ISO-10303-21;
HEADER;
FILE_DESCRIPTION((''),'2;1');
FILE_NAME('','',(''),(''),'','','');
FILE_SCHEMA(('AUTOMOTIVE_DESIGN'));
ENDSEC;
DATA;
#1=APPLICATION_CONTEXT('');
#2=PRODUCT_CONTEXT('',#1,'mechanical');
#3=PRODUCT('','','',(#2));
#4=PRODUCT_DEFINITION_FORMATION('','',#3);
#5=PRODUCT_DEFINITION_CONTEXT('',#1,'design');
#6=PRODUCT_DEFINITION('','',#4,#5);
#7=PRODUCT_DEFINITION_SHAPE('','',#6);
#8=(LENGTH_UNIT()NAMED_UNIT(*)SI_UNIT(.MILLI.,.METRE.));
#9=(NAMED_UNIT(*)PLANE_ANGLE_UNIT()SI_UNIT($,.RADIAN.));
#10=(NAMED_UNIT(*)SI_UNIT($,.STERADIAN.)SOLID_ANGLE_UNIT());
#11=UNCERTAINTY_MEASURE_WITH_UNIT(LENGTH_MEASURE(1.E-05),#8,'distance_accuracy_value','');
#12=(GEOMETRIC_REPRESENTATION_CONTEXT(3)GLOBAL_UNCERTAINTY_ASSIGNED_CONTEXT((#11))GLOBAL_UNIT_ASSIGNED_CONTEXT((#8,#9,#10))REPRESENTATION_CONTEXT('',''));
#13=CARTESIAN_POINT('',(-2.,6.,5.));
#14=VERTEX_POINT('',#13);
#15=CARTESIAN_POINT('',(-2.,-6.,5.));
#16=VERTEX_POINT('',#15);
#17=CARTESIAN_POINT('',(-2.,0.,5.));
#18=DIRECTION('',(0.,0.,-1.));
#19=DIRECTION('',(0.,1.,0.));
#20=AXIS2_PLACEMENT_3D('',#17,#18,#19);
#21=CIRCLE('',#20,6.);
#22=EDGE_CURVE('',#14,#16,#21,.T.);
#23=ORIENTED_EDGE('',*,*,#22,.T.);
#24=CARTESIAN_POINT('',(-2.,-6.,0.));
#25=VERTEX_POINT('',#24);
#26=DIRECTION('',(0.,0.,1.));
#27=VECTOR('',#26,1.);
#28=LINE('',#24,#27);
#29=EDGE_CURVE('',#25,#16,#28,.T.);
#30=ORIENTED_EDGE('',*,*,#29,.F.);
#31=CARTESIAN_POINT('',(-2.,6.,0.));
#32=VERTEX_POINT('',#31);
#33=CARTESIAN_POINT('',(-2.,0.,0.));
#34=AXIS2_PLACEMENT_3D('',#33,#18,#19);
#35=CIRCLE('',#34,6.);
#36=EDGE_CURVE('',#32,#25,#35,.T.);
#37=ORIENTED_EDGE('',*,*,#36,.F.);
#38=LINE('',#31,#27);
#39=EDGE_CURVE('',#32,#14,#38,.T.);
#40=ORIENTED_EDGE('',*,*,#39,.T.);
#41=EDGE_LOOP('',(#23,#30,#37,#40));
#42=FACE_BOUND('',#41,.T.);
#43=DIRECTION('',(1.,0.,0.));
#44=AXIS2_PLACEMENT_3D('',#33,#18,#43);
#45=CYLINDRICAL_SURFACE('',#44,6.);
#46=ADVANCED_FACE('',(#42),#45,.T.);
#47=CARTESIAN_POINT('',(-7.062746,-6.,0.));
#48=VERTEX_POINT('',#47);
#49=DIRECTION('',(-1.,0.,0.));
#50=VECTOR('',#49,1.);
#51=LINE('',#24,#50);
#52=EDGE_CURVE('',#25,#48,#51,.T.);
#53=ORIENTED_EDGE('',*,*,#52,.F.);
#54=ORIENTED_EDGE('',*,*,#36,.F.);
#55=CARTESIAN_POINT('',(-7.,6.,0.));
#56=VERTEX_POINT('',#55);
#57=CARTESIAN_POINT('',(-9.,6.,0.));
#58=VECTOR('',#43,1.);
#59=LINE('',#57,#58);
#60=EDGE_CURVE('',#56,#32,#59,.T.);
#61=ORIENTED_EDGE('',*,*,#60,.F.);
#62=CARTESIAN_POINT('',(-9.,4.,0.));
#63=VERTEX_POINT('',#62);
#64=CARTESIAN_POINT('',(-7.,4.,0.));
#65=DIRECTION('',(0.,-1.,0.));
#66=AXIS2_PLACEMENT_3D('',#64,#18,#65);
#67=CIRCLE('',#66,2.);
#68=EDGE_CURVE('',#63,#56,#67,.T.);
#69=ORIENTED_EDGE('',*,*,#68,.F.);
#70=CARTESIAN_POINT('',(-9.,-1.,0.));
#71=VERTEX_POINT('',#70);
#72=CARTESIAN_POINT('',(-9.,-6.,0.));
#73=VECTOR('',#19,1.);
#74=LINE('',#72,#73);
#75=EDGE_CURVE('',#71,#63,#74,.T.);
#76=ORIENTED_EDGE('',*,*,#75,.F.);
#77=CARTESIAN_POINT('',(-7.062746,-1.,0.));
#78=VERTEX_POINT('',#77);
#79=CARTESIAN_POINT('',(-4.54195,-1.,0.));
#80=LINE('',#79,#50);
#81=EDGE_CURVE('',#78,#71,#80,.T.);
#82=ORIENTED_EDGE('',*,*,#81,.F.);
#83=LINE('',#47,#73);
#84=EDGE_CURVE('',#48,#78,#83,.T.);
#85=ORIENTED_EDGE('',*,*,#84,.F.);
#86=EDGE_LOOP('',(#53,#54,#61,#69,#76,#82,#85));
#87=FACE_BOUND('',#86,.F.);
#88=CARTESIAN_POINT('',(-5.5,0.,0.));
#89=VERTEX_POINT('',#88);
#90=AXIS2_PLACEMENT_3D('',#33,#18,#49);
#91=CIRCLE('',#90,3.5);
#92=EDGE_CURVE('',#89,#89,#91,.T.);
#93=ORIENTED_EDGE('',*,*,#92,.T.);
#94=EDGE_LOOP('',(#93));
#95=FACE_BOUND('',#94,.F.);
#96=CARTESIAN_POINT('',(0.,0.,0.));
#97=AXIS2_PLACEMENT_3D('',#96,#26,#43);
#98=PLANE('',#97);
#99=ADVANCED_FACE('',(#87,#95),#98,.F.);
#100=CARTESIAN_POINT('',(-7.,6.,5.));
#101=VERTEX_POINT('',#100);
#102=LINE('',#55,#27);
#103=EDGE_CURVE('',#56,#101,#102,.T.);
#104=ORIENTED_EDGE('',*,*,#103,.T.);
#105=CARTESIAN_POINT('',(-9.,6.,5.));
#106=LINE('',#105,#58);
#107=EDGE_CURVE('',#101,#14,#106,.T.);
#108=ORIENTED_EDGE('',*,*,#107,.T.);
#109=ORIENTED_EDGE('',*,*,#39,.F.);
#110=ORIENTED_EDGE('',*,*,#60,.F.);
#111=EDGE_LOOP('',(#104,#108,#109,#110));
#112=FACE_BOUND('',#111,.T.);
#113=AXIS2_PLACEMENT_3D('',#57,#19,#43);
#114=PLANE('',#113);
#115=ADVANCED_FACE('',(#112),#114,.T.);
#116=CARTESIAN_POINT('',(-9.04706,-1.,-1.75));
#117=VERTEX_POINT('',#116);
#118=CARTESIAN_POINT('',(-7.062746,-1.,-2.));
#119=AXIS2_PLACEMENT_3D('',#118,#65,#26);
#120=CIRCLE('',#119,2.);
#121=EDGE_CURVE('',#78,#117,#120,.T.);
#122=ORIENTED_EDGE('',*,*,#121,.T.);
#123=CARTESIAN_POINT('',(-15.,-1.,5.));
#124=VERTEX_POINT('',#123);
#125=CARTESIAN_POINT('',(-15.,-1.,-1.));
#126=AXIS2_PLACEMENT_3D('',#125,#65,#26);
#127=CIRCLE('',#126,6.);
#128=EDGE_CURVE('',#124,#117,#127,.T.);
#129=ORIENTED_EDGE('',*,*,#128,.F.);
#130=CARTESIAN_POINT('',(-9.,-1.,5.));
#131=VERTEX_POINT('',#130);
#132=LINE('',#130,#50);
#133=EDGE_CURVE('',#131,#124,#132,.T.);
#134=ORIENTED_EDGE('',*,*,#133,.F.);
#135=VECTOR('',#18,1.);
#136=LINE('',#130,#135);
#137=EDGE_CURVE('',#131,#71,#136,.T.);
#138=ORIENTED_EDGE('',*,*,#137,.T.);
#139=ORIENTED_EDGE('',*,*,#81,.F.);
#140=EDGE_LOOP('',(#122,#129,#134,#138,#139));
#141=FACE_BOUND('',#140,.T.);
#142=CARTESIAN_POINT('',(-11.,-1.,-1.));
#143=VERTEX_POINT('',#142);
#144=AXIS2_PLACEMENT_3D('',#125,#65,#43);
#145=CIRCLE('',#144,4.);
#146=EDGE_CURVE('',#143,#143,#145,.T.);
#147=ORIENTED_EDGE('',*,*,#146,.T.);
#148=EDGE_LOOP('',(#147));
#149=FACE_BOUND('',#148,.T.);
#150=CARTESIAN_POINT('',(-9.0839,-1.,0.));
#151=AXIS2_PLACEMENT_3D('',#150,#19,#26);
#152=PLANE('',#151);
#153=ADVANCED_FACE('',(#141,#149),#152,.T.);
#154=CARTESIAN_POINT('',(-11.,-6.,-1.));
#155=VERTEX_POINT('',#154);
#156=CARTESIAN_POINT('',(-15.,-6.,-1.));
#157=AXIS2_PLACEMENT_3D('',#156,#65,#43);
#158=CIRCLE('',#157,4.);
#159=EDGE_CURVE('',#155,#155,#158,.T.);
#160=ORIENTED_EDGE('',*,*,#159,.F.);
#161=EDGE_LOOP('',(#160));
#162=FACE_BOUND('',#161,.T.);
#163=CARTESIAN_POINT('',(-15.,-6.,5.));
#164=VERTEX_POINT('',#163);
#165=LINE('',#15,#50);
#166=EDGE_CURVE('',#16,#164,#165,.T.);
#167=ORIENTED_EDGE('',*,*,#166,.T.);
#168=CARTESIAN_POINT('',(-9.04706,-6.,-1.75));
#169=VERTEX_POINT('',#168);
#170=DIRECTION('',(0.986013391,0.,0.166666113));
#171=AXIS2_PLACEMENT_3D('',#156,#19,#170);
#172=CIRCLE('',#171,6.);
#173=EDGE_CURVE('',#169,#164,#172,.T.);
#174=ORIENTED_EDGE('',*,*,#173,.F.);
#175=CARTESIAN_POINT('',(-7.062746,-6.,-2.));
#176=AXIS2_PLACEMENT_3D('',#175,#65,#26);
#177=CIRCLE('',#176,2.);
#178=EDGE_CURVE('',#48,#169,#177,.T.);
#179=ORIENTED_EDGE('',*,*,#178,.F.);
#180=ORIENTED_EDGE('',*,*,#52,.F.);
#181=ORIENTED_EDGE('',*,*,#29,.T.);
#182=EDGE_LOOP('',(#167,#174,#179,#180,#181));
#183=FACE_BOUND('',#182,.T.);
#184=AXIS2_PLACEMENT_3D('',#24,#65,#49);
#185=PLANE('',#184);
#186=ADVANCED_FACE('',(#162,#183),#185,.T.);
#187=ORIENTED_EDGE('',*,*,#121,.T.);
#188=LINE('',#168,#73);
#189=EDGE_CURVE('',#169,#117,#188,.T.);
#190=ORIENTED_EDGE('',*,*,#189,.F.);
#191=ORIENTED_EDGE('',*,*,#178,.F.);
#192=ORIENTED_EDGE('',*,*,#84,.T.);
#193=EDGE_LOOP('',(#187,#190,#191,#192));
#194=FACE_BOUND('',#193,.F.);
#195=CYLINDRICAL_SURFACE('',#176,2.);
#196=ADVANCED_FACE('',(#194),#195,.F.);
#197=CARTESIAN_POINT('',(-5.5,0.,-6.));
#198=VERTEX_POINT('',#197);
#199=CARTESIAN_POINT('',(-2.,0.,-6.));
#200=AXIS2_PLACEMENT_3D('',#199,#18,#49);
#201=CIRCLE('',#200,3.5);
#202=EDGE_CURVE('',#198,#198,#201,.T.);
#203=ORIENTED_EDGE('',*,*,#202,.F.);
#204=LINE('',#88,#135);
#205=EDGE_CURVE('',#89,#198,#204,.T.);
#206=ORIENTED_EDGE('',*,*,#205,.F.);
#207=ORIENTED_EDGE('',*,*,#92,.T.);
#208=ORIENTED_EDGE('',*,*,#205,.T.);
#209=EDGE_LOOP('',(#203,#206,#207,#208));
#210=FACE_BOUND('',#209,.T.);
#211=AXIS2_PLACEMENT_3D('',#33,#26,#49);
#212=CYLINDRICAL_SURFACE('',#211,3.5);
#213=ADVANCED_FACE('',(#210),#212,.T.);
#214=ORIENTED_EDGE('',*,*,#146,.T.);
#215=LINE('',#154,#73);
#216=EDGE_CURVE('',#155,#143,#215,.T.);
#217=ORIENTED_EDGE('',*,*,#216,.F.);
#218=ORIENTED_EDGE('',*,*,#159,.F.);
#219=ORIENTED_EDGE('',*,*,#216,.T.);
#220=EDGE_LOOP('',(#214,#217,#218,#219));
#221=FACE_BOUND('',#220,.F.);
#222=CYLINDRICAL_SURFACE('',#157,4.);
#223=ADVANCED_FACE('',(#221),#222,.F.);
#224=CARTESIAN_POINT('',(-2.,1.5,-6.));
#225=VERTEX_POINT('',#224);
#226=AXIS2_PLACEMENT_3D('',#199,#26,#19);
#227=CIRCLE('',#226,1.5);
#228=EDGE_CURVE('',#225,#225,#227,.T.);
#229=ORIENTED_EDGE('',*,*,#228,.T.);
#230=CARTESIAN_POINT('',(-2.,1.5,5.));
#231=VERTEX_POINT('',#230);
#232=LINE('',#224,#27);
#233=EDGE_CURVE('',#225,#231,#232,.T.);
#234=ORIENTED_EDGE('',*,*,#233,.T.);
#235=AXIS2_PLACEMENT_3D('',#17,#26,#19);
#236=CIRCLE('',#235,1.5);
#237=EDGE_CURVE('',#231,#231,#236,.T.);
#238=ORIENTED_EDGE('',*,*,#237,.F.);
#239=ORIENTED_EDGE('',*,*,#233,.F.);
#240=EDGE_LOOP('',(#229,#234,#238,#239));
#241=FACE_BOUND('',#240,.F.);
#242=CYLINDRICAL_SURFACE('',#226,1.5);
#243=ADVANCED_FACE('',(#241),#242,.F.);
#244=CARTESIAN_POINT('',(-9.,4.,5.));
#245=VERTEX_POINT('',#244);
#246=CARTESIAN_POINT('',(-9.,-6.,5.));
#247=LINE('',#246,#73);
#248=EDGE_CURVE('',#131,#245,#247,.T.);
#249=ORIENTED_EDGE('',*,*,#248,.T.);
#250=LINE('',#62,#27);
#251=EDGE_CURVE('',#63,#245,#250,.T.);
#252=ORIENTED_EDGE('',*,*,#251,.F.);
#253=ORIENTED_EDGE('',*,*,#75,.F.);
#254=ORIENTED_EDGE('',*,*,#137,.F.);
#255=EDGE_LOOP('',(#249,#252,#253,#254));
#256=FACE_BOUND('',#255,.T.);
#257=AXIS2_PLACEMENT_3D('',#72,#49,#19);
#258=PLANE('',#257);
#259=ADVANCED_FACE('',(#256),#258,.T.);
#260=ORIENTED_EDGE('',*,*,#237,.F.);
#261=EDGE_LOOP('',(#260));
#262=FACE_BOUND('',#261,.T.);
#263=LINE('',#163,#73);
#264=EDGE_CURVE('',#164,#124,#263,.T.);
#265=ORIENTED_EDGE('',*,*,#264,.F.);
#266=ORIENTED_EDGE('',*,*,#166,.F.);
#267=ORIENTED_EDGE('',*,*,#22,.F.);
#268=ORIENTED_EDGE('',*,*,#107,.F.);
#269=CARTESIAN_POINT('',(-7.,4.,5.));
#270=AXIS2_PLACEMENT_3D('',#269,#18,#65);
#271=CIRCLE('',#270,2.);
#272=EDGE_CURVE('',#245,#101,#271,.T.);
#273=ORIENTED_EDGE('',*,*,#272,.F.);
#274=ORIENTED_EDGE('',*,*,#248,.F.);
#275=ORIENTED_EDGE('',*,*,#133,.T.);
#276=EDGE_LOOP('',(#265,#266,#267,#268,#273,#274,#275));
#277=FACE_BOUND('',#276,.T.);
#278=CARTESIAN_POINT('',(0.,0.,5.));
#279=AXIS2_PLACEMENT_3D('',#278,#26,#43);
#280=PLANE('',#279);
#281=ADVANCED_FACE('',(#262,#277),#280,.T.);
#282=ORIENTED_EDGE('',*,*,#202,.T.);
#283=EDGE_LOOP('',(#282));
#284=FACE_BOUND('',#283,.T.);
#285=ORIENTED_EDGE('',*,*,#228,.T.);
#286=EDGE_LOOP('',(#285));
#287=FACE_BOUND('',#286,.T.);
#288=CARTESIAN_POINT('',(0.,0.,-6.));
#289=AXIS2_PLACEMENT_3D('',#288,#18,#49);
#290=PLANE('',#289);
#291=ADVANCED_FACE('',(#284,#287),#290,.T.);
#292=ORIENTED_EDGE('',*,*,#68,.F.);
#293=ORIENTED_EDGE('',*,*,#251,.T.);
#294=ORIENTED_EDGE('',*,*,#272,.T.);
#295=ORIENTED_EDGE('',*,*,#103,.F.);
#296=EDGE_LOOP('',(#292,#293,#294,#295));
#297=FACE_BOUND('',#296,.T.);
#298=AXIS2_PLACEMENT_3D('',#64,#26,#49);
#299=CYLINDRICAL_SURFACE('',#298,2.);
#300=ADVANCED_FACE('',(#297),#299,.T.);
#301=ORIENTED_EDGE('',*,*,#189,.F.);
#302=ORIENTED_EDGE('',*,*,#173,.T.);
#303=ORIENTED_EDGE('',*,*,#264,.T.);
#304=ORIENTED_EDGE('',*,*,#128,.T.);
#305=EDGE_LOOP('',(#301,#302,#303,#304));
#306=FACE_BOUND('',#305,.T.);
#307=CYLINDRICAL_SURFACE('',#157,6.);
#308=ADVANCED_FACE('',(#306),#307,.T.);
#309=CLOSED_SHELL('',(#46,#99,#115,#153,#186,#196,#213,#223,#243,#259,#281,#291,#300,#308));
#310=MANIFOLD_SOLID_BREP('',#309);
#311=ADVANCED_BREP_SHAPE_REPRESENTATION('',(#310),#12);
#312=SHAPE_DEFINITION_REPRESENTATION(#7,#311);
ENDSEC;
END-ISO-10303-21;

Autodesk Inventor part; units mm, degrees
ref_plane "YZ Plane" through (0, 0, 0) normal (1, 0, 0) x (0, 1, 0)
ref_plane "XZ Plane" through (0, 0, 0) normal (0, 1, 0) x (-1, 0, 0)
ref_plane "XY Plane" through (0, 0, 0) normal (0, 0, 1) x (1, 0, 0)
sketch "Sketch1" plane through (0, 0, 0) normal (0, 0, 1) x (1, 0, 0)
  circle A0 centre (-2, 0) radius 4 projected
  arc A1 (-2, 6) -> (-2, -6) centre (-2, 0) ccw projected
  circle A2 centre (-2, 0) radius 6
  line L0 (-2, -6) -> (-9, -6)
  line L1 (-9, -6) -> (-9, 6)
  line L2 (-9, 6) -> (-2, 6)
  line L3 (-2, 6) -> (-2, -6)
  point P0 (0, 0)
  point P1 (-2, -6)
  dimension "d0" = 7
extrude "Extrusion1" add sketch "Sketch1" along normal blind 5
sketch "Sketch2" plane through (0, 0, 0) normal (0, 0, -1) x (-1, 0, 0)
  circle A0 centre (2, 0) radius 4 projected
  circle A1 centre (2, 0) radius 3.5
  point P0 (0, 0)
  dimension "d3" = 7
extrude "Extrusion2" add sketch "Sketch2" along normal blind 6 contours A1
sketch "Sketch4" plane through (-2, 0, -6) normal (0, 0, -1) x (-1, 0, 0)
  circle A0 centre (0, 0) radius 3.5 projected
  point P0 (-2, 0)
hole "Hole1" at (-2, 0, -6) direction (0, 0, 1) diameter 3 end through all
sketch "Sketch5" plane through (-9, -6, 0) normal (0, -1, 0) x (1, 0, 0)
  circle A0 centre (-6, -1) radius 4
  circle A1 centre (-6, -1) radius 6
  line L0 (0, 0) -> (0, 5) projected
  line L1 (0, 5) -> (-6, 5)
  line L2 (0, 5) -> (7, 5) projected
  line L3 (0, 0) -> (7, 0) projected
  line L4 (0, 0) -> (-0.0839, 0)
  point P0 (9, 0)
  dimension "d15" = 8
  dimension "d16" = 12
  dimension "d20" = 6
extrude "Extrusion4" add sketch "Sketch5" against normal blind 5
fillet "Fillet1" radius 2 1 edges at (-9.0839, -3.5, 0)
fillet "Fillet2" radius 2 1 edges at (-9, 6, 2.5)
equation "\"d17\" = d1"
equation "\"d1\" = 5"
properties part number "center_holder_top_center"
